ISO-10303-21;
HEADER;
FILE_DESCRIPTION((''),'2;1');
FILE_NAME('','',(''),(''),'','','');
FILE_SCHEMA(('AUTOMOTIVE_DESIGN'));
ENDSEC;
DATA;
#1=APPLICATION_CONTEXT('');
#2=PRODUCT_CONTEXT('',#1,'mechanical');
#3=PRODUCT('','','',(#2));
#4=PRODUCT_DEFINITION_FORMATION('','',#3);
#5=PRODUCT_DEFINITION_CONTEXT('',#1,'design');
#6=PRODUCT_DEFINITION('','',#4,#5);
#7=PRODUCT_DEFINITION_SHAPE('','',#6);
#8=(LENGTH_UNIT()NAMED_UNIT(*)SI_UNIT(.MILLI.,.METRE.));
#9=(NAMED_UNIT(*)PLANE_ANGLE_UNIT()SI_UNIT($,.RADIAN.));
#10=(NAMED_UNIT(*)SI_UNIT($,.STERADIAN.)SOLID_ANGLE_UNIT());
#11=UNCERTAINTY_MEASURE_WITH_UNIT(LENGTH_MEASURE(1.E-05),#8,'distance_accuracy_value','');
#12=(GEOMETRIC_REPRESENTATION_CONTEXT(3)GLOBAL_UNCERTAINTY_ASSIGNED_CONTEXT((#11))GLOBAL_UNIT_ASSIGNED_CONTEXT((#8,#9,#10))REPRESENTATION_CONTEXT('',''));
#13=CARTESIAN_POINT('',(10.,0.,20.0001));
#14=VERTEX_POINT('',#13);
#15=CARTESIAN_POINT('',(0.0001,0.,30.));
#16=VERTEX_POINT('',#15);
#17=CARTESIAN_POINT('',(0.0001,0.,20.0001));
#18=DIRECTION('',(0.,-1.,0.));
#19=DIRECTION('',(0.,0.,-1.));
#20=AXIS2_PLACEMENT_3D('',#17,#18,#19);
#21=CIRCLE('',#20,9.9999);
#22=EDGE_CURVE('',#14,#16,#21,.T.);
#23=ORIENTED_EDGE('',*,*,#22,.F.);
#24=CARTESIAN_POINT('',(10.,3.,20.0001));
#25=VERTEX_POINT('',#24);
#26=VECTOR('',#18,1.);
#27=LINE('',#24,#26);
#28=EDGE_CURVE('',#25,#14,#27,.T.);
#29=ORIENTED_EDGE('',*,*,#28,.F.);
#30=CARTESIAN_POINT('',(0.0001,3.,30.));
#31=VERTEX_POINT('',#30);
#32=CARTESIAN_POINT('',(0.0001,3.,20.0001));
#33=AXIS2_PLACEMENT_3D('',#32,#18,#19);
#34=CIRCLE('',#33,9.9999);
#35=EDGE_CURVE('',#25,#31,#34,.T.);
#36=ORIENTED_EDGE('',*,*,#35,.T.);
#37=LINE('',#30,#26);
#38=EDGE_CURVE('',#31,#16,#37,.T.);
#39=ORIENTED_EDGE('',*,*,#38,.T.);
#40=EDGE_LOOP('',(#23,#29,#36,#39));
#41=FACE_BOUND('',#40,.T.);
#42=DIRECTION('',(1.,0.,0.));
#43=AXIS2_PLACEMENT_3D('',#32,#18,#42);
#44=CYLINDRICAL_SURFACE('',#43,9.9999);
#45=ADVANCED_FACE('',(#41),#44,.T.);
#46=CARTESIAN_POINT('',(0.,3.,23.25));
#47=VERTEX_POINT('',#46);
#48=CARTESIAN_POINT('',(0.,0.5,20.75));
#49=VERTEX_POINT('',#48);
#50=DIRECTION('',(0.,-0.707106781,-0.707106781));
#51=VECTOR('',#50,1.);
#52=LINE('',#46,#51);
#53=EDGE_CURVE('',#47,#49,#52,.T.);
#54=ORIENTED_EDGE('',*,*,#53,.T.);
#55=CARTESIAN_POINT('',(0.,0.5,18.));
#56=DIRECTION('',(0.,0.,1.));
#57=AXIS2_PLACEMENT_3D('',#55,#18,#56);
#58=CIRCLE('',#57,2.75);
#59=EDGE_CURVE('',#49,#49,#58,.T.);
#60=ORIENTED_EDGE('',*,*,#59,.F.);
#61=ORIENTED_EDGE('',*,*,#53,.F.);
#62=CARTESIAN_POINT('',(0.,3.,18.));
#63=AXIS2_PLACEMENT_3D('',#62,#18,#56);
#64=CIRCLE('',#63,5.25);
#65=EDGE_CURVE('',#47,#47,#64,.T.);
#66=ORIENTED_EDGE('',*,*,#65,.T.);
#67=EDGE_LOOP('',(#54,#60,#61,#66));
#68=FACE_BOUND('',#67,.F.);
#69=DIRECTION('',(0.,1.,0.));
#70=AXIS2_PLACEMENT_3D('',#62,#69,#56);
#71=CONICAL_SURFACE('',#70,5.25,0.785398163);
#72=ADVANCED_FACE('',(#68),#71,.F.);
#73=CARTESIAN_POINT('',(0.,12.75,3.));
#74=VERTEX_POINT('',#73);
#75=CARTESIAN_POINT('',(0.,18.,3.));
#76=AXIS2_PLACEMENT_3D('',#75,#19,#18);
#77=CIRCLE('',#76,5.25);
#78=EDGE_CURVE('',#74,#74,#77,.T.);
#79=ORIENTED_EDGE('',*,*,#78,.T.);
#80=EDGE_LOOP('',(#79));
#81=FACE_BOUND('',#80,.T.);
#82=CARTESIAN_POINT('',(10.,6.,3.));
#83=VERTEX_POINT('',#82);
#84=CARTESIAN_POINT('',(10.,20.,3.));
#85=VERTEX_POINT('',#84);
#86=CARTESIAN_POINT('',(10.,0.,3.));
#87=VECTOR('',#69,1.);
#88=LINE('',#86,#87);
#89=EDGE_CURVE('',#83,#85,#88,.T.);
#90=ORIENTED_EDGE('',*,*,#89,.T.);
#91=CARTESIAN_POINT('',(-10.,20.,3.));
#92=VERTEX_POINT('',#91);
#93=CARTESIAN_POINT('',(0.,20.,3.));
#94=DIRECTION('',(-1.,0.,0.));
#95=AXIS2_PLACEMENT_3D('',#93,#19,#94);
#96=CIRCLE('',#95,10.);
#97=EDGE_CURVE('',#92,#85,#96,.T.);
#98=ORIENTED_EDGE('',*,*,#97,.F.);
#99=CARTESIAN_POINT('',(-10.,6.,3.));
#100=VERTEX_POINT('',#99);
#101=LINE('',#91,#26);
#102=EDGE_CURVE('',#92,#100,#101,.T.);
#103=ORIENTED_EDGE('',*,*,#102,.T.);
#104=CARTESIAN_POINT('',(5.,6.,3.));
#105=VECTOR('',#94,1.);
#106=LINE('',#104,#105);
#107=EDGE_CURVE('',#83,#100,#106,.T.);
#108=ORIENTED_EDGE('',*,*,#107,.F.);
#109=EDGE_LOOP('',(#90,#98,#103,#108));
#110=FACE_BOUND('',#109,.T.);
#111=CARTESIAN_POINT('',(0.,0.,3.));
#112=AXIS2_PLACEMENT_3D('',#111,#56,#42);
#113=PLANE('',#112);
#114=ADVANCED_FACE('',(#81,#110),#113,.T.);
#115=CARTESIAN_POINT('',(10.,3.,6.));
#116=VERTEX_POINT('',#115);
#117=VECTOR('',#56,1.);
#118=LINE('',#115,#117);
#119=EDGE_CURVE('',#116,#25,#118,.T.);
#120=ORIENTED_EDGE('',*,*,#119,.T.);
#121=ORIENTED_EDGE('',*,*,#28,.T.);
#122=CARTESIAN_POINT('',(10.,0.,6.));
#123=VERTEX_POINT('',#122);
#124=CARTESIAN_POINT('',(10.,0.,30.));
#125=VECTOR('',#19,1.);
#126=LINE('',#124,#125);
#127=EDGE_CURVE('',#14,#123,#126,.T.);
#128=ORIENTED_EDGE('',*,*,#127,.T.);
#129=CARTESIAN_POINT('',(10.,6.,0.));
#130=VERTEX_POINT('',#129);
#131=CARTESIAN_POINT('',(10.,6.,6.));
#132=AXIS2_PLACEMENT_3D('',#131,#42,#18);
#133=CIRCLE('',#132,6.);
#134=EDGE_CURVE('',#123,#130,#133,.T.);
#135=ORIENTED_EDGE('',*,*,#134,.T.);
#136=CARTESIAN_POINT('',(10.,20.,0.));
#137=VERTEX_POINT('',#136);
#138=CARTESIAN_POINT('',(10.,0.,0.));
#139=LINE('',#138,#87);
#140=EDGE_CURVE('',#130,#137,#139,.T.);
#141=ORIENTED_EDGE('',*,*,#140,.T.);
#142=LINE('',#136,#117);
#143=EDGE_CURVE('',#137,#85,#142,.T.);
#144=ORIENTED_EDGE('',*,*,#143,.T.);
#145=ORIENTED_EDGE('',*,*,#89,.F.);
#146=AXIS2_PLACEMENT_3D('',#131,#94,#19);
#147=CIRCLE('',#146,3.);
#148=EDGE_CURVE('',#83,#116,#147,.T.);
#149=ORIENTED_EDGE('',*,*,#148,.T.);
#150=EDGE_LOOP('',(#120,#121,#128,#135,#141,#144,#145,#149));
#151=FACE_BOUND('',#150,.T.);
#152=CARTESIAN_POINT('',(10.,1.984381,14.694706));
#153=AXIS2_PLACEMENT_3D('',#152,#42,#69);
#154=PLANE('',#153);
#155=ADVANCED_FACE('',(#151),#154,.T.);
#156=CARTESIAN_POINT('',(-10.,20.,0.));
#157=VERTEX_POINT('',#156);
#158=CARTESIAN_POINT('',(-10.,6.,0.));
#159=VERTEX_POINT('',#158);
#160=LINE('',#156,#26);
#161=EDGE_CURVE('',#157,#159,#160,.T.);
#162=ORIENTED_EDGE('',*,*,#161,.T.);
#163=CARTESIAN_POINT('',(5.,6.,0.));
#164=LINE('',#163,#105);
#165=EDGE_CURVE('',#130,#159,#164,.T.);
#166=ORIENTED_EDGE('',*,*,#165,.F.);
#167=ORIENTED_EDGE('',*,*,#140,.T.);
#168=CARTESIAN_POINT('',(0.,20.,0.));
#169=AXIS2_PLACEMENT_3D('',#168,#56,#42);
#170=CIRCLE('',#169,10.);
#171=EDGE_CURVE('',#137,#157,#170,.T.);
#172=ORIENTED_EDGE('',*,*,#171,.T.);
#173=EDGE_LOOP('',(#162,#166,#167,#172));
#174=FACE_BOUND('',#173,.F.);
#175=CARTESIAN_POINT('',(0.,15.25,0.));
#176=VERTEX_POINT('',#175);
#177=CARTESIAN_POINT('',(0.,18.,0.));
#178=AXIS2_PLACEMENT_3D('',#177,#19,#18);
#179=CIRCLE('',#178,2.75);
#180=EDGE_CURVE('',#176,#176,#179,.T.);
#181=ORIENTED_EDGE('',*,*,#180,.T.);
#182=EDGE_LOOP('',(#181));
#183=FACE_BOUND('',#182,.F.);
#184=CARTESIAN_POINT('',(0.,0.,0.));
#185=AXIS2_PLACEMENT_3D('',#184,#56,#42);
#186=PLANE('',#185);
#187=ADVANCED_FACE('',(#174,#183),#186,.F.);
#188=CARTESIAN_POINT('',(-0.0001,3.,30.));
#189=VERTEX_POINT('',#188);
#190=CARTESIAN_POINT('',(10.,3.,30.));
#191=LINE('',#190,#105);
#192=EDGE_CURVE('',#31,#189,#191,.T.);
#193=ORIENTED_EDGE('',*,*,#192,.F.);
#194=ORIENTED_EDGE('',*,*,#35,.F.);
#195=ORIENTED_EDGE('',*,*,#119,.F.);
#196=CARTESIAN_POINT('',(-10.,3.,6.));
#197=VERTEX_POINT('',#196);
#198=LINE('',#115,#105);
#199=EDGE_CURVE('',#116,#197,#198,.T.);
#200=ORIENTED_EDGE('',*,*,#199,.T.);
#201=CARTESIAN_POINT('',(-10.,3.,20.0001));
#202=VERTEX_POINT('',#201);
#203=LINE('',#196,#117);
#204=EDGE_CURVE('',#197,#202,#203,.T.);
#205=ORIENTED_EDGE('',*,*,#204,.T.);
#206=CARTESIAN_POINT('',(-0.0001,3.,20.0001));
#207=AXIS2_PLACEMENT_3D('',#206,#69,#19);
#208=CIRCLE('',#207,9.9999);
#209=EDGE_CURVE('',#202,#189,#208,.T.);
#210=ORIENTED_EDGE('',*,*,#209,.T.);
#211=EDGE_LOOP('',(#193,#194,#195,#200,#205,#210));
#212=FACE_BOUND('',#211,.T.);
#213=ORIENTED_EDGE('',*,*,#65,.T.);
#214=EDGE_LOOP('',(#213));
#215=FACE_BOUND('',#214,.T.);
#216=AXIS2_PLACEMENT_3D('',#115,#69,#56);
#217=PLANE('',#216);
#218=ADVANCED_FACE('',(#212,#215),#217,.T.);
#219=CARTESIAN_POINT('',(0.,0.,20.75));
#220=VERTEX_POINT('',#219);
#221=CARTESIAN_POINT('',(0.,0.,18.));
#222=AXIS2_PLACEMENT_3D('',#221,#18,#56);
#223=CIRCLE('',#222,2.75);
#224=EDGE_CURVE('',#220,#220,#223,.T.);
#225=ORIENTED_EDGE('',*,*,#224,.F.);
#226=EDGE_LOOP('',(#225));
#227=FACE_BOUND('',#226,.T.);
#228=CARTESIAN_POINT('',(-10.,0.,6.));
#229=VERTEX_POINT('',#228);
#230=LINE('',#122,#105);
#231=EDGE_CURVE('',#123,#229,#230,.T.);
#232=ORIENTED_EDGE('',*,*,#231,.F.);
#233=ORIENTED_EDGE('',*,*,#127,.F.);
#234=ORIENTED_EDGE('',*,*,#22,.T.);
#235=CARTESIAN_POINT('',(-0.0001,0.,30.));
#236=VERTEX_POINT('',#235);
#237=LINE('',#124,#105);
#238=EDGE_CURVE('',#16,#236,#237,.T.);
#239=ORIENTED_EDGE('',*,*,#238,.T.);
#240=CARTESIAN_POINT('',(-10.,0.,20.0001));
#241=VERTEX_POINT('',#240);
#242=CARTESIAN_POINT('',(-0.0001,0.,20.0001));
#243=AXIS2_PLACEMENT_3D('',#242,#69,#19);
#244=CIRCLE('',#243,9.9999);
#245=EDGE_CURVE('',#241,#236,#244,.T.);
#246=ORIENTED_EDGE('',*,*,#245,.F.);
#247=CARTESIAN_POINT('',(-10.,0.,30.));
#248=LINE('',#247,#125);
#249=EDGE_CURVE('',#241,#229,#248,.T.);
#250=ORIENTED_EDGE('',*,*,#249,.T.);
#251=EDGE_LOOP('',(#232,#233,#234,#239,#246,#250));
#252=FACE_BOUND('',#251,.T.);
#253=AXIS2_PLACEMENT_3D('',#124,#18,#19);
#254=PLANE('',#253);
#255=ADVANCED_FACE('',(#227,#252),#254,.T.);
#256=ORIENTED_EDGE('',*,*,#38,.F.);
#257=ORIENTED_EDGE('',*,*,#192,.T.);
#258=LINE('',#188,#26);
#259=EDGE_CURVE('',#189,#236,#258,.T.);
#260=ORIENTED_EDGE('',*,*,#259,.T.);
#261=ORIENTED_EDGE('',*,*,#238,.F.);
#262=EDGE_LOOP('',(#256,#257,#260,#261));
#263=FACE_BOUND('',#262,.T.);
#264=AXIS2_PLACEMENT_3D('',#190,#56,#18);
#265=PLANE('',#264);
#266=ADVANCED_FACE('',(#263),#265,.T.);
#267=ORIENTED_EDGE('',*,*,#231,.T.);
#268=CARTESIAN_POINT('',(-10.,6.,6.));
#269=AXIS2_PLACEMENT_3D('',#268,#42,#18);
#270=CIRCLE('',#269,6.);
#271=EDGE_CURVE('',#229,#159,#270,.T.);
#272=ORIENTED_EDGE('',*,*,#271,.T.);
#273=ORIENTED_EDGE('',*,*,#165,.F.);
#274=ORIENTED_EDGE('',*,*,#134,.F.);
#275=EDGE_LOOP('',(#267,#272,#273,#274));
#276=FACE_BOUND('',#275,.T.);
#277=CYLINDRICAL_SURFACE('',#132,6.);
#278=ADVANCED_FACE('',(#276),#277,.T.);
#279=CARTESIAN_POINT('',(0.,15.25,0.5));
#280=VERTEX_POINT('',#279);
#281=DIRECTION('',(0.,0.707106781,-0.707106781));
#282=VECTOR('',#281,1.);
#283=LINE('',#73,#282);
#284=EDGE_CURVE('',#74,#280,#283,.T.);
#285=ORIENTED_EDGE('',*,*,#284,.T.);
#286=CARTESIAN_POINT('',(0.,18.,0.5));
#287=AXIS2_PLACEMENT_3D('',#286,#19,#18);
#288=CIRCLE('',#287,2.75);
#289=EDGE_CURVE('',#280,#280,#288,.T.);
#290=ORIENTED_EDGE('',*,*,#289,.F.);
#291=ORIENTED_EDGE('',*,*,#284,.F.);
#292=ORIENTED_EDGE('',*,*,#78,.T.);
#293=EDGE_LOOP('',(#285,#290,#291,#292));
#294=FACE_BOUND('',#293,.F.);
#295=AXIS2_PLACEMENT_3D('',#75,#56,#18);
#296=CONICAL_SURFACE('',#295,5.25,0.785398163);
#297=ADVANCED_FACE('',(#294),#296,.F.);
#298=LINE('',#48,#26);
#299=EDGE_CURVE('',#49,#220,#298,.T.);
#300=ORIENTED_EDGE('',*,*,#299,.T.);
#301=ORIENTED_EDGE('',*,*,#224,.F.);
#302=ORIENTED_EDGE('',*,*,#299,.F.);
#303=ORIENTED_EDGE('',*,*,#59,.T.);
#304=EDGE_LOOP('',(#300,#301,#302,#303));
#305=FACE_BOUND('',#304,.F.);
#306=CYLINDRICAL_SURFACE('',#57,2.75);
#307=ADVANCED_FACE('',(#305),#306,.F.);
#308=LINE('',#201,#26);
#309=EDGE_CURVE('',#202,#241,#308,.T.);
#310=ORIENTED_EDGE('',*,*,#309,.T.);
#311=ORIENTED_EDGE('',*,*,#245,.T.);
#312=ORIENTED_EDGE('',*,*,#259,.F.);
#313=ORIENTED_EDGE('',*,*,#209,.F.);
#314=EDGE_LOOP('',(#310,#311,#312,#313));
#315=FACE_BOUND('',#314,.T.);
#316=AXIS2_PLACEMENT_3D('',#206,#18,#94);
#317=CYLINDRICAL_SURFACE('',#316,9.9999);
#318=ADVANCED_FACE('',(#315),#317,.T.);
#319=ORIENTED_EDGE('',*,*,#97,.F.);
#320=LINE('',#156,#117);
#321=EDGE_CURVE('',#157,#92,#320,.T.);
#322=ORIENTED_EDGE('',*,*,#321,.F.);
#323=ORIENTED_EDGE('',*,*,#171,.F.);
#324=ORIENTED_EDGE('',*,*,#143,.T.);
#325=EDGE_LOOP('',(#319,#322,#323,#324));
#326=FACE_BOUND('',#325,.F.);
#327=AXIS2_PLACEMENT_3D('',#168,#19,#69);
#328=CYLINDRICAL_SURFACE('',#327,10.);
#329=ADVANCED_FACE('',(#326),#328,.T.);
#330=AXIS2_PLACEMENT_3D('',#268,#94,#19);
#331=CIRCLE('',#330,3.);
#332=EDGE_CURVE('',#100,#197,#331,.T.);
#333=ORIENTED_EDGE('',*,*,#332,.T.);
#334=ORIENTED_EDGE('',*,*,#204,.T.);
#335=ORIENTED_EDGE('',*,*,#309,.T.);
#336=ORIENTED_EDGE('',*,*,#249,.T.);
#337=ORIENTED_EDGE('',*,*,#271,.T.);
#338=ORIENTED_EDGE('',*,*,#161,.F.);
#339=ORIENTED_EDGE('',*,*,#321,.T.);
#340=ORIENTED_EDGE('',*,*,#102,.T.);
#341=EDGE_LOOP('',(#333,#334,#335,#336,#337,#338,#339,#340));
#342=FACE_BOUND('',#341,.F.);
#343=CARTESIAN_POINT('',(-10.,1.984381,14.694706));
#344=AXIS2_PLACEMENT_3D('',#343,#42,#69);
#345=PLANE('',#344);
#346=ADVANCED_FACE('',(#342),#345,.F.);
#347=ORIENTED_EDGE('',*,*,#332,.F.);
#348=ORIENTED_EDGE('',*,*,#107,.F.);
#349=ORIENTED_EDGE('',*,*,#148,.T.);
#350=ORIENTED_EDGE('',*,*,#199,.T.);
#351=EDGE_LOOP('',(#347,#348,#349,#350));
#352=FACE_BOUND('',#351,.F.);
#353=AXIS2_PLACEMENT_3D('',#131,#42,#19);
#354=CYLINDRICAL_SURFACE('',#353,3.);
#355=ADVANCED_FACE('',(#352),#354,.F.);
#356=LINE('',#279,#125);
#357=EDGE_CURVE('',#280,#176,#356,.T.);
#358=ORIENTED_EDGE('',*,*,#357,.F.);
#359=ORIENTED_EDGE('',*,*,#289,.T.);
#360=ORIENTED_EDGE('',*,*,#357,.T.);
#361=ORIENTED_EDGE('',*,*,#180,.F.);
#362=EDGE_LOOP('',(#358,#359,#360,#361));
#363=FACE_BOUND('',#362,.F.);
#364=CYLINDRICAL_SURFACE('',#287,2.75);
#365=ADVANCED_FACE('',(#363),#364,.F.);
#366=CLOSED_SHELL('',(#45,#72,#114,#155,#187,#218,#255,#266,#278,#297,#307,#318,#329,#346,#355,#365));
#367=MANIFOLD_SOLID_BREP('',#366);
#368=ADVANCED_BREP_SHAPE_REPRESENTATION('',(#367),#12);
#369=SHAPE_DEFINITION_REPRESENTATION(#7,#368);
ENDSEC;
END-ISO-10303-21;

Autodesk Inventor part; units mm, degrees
ref_plane "YZ Plane" through (0, 0, 0) normal (1, 0, 0) x (0, 1, 0)
ref_plane "XZ Plane" through (0, 0, 0) normal (0, 1, 0) x (-1, 0, 0)
ref_plane "XY Plane" through (0, 0, 0) normal (0, 0, 1) x (1, 0, 0)
sketch "Эскиз1" plane through (0, 0, 0) normal (0, 0, 1) x (1, 0, 0)
  line L0 (-10, 0) -> (10, 0)
  line L1 (10, 0) -> (10, 20)
  line L2 (0, 30) -> (0, 30)
  line L3 (-10, 20) -> (-10, 0)
  arc A0 (0, 30) -> (-10, 20) centre (0, 20) ccw
  arc A1 (10, 20) -> (0, 30) centre (0, 20) ccw
  line L4 (0, -6.4142) -> (0, 38.4853)
  point P0 (0, 0)
  point P1 (0, 30)
  dimension "d0" = 20
  dimension "d1" = 10
  dimension "d2" = 20
extrude "Пластина1" add sketch "Эскиз1" along normal blind 3
sketch "Эскиз2" plane through (10, 3, 0) normal (0, -1, 0) x (1, 0, 0)
  line L0 (-20, 0) -> (0, 0)
  line L1 (0, 0) -> (0, 30)
  line L2 (0, 30) -> (-20, 30)
  line L3 (-20, 30) -> (-20, 0)
edge flange "Фланец1" height 30 angle 90 thickness 3 bend radius 3 thickness toward (0, -1, 0) relief tear relief width 3 relief depth 1.5 edges at (0, 0, 3) wall of the first edge with corners at (-10, 3, 0) (10, 3, 0) (10, 3, 30) (-10, 3, 30)
bend "Сгиб1"
corner "УглСтык1"
fillet "Сопряжение1" radius 10 2 edges at (-10, 1.5, 30) (10, 1.5, 30)
sketch "Эскиз3" plane through (0, 0, 3) normal (0, 0, 1) x (1, 0, 0)
  line L0 (0, -6) -> (0, 36) projected
  arc A0 (10, 20) -> (-10, 20) centre (0, 20) ccw projected
  point P0 (0, 0)
  point P1 (0, 18)
  point P2 (0, 30)
  dimension "d29" = 12
hole "Отверстие1" at (0, 18, 3) direction (0, 0, -1) diameter 5.5 end through all countersink diameter 10.5 countersink angle 90
sketch "Эскиз4" plane through (-10, 3, 6) normal (0, 1, 0) x (1, 0, 0)
  line L0 (0, 0) -> (0, -14) projected
  arc A0 (0, -14) -> (20, -14) centre (10, -14) ccw projected
  point P0 (10, 6)
  point P1 (10, -12)
  point P2 (10, -24)
  dimension "d30" = 10
  dimension "d31" = 12
hole "Отверстие2" at (0, 3, 18) direction (0, -1, 0) diameter 5.5 end through all countersink diameter 10.5 countersink angle 90
equation "\"d20\" = Толщина"
equation "\"d3\" = Толщина"
equation "\"d4\" = Ширина_просечки"
equation "\"d5\" = Глубина_просечки"
equation "\"d6\" = Мин_остаток"
equation "\"d7\" = Радиус_перехода"
equation "\"d10\" = Радиус_гибки"
equation "\"d11\" = Размер_просечки"
equation "\"d12\" = Размер_зазора"
equation "\"d13\" = Радиус_Якоби"
equation "\"Радиус_гибки\" = Толщина"
equation "\"Ширина_просечки\" = Толщина"
equation "\"Глубина_просечки\" = 0.5 * Толщина"
equation "\"Размер_просечки\" = 4 * Толщина"
equation "\"Мин_остаток\" = 2 * Толщина"
equation "\"Радиус_перехода\" = Радиус_гибки"
equation "\"Радиус_Якоби\" = Радиус_гибки"
equation "\"Размер_зазора\" = Толщина"
equation "\"Толщина\" = 3"
properties part number "скоба"
